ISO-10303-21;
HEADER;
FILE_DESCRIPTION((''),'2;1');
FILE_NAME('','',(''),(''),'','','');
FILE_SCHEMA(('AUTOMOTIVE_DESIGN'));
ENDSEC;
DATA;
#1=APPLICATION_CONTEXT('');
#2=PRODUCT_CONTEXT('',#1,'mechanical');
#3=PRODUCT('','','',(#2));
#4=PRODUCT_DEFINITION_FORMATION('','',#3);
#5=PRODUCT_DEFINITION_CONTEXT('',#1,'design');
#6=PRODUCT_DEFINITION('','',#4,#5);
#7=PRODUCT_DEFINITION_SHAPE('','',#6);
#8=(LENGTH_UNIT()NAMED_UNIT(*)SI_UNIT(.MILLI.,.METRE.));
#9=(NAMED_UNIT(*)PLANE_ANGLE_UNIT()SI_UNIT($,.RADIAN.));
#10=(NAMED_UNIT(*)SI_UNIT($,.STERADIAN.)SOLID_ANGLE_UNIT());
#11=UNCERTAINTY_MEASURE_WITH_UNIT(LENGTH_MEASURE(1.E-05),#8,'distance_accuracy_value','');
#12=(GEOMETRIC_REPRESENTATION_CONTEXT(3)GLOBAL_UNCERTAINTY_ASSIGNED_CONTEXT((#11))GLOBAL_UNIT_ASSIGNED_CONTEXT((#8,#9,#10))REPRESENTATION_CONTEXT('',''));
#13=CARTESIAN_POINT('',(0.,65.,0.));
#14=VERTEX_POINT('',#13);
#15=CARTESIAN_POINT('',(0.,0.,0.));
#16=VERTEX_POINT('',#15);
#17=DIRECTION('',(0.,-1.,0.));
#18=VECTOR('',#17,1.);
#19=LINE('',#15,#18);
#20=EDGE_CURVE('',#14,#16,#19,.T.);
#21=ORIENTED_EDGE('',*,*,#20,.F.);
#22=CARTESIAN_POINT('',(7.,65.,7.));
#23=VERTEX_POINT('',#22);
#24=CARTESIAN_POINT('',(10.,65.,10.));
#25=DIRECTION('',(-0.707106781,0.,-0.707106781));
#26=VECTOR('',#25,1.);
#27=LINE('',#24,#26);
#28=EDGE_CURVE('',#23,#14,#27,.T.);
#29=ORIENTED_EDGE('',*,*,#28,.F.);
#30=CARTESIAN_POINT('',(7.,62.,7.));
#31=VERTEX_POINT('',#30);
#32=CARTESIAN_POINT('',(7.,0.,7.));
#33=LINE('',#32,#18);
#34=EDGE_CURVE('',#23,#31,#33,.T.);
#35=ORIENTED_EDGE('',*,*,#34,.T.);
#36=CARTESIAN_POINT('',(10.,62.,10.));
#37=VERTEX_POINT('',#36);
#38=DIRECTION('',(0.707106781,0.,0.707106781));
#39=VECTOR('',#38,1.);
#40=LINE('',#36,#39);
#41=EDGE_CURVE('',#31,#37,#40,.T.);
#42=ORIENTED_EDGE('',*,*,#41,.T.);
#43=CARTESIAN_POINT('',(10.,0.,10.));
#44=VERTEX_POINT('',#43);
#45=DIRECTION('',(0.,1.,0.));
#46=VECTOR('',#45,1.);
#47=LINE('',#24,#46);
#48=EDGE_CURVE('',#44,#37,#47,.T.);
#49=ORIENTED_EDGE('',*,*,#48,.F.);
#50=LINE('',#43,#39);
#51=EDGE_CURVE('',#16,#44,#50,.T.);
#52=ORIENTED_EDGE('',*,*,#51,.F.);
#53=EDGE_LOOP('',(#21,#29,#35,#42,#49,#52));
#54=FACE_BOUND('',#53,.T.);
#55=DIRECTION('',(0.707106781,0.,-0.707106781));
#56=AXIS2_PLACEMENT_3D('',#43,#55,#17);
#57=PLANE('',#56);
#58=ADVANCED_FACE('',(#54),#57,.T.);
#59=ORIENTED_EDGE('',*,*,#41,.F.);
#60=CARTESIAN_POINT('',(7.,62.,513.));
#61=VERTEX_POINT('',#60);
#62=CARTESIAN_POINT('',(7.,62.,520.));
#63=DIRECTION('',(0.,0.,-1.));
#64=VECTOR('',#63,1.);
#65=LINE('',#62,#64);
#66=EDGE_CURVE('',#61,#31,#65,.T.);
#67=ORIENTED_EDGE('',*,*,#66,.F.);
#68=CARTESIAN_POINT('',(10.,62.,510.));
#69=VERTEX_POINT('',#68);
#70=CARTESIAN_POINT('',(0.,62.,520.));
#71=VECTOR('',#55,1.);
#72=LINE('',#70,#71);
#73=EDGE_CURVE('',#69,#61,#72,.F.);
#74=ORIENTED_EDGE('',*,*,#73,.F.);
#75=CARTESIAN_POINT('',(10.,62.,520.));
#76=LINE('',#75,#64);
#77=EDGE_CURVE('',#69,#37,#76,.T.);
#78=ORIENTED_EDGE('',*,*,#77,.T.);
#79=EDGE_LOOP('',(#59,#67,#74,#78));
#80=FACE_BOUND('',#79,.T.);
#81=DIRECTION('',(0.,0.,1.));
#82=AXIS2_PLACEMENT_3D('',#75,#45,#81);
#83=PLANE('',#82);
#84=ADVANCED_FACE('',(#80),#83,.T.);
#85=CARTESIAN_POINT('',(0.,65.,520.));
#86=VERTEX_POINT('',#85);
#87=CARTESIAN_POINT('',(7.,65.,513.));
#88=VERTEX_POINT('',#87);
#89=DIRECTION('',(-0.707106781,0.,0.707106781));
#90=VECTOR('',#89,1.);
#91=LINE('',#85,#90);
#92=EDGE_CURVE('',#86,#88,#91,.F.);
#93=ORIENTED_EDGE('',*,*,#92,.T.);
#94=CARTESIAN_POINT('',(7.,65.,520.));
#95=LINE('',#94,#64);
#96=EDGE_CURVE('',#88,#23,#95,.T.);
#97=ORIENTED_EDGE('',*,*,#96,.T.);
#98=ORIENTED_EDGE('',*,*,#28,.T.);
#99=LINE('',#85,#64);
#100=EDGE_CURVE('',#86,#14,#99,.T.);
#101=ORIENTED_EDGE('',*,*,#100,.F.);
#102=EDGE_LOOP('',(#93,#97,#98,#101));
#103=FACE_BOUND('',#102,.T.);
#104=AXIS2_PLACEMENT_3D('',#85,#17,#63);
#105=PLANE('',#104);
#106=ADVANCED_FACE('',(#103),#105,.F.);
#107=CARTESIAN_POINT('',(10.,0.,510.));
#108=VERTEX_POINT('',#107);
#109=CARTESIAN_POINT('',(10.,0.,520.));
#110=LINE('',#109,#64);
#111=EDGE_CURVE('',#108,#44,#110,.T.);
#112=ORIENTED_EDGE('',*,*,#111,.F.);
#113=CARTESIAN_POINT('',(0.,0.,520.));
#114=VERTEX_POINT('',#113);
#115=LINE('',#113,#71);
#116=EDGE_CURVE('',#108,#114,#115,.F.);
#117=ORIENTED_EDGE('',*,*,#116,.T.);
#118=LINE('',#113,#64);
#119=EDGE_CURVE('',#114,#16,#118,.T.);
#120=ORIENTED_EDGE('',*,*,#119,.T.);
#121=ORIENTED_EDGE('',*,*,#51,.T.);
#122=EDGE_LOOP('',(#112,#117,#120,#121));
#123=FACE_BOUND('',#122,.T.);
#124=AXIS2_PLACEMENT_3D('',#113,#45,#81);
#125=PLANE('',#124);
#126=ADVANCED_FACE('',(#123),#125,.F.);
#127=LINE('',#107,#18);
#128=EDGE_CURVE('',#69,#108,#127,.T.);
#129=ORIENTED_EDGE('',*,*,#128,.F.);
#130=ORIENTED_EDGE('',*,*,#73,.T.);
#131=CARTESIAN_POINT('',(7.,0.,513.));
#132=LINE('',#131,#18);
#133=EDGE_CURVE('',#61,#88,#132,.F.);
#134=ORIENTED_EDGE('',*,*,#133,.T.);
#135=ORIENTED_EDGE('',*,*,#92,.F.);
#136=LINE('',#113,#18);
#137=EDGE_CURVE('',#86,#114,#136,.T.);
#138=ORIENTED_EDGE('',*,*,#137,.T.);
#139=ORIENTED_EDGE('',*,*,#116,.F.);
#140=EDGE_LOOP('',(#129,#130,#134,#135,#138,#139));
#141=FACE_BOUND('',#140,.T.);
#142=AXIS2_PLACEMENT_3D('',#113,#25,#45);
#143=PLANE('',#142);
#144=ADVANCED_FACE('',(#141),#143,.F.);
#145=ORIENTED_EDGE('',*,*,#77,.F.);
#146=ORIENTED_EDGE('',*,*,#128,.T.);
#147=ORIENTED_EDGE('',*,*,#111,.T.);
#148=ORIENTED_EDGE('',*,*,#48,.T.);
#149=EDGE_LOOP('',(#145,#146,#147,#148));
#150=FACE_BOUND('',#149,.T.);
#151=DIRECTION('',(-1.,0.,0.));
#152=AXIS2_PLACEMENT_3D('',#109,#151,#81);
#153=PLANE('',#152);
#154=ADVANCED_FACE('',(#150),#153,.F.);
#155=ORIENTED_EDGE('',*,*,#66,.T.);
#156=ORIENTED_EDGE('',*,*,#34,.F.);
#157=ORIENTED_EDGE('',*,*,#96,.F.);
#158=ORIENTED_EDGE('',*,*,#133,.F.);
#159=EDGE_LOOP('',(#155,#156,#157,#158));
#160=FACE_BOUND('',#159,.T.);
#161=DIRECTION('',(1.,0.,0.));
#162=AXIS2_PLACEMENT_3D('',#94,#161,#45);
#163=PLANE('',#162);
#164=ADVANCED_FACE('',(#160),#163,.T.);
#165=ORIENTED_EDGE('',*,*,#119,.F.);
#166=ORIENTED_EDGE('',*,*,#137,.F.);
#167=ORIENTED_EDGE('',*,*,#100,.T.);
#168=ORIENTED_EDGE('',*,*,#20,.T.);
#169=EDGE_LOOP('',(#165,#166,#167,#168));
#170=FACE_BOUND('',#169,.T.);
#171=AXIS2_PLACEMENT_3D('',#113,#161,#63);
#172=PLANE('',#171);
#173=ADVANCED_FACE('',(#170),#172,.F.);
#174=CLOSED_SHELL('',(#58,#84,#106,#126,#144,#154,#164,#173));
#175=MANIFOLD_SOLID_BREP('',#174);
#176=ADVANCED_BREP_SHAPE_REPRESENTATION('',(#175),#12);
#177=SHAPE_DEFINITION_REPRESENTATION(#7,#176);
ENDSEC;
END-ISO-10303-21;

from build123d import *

# Parameters (mm, degrees)
ESQUISSE1_W             = 10
ESQUISSE1_H             = 65
BOSS_EXTRU_1_DEPTH      = 520
CHANFREIN1_SIZE         = 10
ESQUISSE2_W             = 3
ESQUISSE2_H             = 3
ENL_V_MAT_EXTRU_1_DEPTH = 525.14215629


with BuildPart() as part:
    # Esquisse1 → Boss.-Extru.1 (new body)
    with BuildSketch(Plane.XY):
        with Locations((5, 32.5)):
            Rectangle(ESQUISSE1_W, ESQUISSE1_H)
    extrude(amount=BOSS_EXTRU_1_DEPTH)

    # Chanfrein1
    chanfrein1_edges = [part.edges().sort_by_distance(p)[0] for p in [
        (10, 32.5, 520),
        (10, 32.5, 0),
    ]]
    chamfer(chanfrein1_edges, length=CHANFREIN1_SIZE - 0.0001)  # a hair under: the kernel refuses the full size

    # Esquisse2 → Enlèv. mat.-Extru.1 (cut, through all)
    with BuildSketch(Plane.XY):
        with Locations((8.5, 63.5)):
            Rectangle(ESQUISSE2_W, ESQUISSE2_H)
    extrude(amount=ENL_V_MAT_EXTRU_1_DEPTH, mode=Mode.SUBTRACT)


solid = part.part
